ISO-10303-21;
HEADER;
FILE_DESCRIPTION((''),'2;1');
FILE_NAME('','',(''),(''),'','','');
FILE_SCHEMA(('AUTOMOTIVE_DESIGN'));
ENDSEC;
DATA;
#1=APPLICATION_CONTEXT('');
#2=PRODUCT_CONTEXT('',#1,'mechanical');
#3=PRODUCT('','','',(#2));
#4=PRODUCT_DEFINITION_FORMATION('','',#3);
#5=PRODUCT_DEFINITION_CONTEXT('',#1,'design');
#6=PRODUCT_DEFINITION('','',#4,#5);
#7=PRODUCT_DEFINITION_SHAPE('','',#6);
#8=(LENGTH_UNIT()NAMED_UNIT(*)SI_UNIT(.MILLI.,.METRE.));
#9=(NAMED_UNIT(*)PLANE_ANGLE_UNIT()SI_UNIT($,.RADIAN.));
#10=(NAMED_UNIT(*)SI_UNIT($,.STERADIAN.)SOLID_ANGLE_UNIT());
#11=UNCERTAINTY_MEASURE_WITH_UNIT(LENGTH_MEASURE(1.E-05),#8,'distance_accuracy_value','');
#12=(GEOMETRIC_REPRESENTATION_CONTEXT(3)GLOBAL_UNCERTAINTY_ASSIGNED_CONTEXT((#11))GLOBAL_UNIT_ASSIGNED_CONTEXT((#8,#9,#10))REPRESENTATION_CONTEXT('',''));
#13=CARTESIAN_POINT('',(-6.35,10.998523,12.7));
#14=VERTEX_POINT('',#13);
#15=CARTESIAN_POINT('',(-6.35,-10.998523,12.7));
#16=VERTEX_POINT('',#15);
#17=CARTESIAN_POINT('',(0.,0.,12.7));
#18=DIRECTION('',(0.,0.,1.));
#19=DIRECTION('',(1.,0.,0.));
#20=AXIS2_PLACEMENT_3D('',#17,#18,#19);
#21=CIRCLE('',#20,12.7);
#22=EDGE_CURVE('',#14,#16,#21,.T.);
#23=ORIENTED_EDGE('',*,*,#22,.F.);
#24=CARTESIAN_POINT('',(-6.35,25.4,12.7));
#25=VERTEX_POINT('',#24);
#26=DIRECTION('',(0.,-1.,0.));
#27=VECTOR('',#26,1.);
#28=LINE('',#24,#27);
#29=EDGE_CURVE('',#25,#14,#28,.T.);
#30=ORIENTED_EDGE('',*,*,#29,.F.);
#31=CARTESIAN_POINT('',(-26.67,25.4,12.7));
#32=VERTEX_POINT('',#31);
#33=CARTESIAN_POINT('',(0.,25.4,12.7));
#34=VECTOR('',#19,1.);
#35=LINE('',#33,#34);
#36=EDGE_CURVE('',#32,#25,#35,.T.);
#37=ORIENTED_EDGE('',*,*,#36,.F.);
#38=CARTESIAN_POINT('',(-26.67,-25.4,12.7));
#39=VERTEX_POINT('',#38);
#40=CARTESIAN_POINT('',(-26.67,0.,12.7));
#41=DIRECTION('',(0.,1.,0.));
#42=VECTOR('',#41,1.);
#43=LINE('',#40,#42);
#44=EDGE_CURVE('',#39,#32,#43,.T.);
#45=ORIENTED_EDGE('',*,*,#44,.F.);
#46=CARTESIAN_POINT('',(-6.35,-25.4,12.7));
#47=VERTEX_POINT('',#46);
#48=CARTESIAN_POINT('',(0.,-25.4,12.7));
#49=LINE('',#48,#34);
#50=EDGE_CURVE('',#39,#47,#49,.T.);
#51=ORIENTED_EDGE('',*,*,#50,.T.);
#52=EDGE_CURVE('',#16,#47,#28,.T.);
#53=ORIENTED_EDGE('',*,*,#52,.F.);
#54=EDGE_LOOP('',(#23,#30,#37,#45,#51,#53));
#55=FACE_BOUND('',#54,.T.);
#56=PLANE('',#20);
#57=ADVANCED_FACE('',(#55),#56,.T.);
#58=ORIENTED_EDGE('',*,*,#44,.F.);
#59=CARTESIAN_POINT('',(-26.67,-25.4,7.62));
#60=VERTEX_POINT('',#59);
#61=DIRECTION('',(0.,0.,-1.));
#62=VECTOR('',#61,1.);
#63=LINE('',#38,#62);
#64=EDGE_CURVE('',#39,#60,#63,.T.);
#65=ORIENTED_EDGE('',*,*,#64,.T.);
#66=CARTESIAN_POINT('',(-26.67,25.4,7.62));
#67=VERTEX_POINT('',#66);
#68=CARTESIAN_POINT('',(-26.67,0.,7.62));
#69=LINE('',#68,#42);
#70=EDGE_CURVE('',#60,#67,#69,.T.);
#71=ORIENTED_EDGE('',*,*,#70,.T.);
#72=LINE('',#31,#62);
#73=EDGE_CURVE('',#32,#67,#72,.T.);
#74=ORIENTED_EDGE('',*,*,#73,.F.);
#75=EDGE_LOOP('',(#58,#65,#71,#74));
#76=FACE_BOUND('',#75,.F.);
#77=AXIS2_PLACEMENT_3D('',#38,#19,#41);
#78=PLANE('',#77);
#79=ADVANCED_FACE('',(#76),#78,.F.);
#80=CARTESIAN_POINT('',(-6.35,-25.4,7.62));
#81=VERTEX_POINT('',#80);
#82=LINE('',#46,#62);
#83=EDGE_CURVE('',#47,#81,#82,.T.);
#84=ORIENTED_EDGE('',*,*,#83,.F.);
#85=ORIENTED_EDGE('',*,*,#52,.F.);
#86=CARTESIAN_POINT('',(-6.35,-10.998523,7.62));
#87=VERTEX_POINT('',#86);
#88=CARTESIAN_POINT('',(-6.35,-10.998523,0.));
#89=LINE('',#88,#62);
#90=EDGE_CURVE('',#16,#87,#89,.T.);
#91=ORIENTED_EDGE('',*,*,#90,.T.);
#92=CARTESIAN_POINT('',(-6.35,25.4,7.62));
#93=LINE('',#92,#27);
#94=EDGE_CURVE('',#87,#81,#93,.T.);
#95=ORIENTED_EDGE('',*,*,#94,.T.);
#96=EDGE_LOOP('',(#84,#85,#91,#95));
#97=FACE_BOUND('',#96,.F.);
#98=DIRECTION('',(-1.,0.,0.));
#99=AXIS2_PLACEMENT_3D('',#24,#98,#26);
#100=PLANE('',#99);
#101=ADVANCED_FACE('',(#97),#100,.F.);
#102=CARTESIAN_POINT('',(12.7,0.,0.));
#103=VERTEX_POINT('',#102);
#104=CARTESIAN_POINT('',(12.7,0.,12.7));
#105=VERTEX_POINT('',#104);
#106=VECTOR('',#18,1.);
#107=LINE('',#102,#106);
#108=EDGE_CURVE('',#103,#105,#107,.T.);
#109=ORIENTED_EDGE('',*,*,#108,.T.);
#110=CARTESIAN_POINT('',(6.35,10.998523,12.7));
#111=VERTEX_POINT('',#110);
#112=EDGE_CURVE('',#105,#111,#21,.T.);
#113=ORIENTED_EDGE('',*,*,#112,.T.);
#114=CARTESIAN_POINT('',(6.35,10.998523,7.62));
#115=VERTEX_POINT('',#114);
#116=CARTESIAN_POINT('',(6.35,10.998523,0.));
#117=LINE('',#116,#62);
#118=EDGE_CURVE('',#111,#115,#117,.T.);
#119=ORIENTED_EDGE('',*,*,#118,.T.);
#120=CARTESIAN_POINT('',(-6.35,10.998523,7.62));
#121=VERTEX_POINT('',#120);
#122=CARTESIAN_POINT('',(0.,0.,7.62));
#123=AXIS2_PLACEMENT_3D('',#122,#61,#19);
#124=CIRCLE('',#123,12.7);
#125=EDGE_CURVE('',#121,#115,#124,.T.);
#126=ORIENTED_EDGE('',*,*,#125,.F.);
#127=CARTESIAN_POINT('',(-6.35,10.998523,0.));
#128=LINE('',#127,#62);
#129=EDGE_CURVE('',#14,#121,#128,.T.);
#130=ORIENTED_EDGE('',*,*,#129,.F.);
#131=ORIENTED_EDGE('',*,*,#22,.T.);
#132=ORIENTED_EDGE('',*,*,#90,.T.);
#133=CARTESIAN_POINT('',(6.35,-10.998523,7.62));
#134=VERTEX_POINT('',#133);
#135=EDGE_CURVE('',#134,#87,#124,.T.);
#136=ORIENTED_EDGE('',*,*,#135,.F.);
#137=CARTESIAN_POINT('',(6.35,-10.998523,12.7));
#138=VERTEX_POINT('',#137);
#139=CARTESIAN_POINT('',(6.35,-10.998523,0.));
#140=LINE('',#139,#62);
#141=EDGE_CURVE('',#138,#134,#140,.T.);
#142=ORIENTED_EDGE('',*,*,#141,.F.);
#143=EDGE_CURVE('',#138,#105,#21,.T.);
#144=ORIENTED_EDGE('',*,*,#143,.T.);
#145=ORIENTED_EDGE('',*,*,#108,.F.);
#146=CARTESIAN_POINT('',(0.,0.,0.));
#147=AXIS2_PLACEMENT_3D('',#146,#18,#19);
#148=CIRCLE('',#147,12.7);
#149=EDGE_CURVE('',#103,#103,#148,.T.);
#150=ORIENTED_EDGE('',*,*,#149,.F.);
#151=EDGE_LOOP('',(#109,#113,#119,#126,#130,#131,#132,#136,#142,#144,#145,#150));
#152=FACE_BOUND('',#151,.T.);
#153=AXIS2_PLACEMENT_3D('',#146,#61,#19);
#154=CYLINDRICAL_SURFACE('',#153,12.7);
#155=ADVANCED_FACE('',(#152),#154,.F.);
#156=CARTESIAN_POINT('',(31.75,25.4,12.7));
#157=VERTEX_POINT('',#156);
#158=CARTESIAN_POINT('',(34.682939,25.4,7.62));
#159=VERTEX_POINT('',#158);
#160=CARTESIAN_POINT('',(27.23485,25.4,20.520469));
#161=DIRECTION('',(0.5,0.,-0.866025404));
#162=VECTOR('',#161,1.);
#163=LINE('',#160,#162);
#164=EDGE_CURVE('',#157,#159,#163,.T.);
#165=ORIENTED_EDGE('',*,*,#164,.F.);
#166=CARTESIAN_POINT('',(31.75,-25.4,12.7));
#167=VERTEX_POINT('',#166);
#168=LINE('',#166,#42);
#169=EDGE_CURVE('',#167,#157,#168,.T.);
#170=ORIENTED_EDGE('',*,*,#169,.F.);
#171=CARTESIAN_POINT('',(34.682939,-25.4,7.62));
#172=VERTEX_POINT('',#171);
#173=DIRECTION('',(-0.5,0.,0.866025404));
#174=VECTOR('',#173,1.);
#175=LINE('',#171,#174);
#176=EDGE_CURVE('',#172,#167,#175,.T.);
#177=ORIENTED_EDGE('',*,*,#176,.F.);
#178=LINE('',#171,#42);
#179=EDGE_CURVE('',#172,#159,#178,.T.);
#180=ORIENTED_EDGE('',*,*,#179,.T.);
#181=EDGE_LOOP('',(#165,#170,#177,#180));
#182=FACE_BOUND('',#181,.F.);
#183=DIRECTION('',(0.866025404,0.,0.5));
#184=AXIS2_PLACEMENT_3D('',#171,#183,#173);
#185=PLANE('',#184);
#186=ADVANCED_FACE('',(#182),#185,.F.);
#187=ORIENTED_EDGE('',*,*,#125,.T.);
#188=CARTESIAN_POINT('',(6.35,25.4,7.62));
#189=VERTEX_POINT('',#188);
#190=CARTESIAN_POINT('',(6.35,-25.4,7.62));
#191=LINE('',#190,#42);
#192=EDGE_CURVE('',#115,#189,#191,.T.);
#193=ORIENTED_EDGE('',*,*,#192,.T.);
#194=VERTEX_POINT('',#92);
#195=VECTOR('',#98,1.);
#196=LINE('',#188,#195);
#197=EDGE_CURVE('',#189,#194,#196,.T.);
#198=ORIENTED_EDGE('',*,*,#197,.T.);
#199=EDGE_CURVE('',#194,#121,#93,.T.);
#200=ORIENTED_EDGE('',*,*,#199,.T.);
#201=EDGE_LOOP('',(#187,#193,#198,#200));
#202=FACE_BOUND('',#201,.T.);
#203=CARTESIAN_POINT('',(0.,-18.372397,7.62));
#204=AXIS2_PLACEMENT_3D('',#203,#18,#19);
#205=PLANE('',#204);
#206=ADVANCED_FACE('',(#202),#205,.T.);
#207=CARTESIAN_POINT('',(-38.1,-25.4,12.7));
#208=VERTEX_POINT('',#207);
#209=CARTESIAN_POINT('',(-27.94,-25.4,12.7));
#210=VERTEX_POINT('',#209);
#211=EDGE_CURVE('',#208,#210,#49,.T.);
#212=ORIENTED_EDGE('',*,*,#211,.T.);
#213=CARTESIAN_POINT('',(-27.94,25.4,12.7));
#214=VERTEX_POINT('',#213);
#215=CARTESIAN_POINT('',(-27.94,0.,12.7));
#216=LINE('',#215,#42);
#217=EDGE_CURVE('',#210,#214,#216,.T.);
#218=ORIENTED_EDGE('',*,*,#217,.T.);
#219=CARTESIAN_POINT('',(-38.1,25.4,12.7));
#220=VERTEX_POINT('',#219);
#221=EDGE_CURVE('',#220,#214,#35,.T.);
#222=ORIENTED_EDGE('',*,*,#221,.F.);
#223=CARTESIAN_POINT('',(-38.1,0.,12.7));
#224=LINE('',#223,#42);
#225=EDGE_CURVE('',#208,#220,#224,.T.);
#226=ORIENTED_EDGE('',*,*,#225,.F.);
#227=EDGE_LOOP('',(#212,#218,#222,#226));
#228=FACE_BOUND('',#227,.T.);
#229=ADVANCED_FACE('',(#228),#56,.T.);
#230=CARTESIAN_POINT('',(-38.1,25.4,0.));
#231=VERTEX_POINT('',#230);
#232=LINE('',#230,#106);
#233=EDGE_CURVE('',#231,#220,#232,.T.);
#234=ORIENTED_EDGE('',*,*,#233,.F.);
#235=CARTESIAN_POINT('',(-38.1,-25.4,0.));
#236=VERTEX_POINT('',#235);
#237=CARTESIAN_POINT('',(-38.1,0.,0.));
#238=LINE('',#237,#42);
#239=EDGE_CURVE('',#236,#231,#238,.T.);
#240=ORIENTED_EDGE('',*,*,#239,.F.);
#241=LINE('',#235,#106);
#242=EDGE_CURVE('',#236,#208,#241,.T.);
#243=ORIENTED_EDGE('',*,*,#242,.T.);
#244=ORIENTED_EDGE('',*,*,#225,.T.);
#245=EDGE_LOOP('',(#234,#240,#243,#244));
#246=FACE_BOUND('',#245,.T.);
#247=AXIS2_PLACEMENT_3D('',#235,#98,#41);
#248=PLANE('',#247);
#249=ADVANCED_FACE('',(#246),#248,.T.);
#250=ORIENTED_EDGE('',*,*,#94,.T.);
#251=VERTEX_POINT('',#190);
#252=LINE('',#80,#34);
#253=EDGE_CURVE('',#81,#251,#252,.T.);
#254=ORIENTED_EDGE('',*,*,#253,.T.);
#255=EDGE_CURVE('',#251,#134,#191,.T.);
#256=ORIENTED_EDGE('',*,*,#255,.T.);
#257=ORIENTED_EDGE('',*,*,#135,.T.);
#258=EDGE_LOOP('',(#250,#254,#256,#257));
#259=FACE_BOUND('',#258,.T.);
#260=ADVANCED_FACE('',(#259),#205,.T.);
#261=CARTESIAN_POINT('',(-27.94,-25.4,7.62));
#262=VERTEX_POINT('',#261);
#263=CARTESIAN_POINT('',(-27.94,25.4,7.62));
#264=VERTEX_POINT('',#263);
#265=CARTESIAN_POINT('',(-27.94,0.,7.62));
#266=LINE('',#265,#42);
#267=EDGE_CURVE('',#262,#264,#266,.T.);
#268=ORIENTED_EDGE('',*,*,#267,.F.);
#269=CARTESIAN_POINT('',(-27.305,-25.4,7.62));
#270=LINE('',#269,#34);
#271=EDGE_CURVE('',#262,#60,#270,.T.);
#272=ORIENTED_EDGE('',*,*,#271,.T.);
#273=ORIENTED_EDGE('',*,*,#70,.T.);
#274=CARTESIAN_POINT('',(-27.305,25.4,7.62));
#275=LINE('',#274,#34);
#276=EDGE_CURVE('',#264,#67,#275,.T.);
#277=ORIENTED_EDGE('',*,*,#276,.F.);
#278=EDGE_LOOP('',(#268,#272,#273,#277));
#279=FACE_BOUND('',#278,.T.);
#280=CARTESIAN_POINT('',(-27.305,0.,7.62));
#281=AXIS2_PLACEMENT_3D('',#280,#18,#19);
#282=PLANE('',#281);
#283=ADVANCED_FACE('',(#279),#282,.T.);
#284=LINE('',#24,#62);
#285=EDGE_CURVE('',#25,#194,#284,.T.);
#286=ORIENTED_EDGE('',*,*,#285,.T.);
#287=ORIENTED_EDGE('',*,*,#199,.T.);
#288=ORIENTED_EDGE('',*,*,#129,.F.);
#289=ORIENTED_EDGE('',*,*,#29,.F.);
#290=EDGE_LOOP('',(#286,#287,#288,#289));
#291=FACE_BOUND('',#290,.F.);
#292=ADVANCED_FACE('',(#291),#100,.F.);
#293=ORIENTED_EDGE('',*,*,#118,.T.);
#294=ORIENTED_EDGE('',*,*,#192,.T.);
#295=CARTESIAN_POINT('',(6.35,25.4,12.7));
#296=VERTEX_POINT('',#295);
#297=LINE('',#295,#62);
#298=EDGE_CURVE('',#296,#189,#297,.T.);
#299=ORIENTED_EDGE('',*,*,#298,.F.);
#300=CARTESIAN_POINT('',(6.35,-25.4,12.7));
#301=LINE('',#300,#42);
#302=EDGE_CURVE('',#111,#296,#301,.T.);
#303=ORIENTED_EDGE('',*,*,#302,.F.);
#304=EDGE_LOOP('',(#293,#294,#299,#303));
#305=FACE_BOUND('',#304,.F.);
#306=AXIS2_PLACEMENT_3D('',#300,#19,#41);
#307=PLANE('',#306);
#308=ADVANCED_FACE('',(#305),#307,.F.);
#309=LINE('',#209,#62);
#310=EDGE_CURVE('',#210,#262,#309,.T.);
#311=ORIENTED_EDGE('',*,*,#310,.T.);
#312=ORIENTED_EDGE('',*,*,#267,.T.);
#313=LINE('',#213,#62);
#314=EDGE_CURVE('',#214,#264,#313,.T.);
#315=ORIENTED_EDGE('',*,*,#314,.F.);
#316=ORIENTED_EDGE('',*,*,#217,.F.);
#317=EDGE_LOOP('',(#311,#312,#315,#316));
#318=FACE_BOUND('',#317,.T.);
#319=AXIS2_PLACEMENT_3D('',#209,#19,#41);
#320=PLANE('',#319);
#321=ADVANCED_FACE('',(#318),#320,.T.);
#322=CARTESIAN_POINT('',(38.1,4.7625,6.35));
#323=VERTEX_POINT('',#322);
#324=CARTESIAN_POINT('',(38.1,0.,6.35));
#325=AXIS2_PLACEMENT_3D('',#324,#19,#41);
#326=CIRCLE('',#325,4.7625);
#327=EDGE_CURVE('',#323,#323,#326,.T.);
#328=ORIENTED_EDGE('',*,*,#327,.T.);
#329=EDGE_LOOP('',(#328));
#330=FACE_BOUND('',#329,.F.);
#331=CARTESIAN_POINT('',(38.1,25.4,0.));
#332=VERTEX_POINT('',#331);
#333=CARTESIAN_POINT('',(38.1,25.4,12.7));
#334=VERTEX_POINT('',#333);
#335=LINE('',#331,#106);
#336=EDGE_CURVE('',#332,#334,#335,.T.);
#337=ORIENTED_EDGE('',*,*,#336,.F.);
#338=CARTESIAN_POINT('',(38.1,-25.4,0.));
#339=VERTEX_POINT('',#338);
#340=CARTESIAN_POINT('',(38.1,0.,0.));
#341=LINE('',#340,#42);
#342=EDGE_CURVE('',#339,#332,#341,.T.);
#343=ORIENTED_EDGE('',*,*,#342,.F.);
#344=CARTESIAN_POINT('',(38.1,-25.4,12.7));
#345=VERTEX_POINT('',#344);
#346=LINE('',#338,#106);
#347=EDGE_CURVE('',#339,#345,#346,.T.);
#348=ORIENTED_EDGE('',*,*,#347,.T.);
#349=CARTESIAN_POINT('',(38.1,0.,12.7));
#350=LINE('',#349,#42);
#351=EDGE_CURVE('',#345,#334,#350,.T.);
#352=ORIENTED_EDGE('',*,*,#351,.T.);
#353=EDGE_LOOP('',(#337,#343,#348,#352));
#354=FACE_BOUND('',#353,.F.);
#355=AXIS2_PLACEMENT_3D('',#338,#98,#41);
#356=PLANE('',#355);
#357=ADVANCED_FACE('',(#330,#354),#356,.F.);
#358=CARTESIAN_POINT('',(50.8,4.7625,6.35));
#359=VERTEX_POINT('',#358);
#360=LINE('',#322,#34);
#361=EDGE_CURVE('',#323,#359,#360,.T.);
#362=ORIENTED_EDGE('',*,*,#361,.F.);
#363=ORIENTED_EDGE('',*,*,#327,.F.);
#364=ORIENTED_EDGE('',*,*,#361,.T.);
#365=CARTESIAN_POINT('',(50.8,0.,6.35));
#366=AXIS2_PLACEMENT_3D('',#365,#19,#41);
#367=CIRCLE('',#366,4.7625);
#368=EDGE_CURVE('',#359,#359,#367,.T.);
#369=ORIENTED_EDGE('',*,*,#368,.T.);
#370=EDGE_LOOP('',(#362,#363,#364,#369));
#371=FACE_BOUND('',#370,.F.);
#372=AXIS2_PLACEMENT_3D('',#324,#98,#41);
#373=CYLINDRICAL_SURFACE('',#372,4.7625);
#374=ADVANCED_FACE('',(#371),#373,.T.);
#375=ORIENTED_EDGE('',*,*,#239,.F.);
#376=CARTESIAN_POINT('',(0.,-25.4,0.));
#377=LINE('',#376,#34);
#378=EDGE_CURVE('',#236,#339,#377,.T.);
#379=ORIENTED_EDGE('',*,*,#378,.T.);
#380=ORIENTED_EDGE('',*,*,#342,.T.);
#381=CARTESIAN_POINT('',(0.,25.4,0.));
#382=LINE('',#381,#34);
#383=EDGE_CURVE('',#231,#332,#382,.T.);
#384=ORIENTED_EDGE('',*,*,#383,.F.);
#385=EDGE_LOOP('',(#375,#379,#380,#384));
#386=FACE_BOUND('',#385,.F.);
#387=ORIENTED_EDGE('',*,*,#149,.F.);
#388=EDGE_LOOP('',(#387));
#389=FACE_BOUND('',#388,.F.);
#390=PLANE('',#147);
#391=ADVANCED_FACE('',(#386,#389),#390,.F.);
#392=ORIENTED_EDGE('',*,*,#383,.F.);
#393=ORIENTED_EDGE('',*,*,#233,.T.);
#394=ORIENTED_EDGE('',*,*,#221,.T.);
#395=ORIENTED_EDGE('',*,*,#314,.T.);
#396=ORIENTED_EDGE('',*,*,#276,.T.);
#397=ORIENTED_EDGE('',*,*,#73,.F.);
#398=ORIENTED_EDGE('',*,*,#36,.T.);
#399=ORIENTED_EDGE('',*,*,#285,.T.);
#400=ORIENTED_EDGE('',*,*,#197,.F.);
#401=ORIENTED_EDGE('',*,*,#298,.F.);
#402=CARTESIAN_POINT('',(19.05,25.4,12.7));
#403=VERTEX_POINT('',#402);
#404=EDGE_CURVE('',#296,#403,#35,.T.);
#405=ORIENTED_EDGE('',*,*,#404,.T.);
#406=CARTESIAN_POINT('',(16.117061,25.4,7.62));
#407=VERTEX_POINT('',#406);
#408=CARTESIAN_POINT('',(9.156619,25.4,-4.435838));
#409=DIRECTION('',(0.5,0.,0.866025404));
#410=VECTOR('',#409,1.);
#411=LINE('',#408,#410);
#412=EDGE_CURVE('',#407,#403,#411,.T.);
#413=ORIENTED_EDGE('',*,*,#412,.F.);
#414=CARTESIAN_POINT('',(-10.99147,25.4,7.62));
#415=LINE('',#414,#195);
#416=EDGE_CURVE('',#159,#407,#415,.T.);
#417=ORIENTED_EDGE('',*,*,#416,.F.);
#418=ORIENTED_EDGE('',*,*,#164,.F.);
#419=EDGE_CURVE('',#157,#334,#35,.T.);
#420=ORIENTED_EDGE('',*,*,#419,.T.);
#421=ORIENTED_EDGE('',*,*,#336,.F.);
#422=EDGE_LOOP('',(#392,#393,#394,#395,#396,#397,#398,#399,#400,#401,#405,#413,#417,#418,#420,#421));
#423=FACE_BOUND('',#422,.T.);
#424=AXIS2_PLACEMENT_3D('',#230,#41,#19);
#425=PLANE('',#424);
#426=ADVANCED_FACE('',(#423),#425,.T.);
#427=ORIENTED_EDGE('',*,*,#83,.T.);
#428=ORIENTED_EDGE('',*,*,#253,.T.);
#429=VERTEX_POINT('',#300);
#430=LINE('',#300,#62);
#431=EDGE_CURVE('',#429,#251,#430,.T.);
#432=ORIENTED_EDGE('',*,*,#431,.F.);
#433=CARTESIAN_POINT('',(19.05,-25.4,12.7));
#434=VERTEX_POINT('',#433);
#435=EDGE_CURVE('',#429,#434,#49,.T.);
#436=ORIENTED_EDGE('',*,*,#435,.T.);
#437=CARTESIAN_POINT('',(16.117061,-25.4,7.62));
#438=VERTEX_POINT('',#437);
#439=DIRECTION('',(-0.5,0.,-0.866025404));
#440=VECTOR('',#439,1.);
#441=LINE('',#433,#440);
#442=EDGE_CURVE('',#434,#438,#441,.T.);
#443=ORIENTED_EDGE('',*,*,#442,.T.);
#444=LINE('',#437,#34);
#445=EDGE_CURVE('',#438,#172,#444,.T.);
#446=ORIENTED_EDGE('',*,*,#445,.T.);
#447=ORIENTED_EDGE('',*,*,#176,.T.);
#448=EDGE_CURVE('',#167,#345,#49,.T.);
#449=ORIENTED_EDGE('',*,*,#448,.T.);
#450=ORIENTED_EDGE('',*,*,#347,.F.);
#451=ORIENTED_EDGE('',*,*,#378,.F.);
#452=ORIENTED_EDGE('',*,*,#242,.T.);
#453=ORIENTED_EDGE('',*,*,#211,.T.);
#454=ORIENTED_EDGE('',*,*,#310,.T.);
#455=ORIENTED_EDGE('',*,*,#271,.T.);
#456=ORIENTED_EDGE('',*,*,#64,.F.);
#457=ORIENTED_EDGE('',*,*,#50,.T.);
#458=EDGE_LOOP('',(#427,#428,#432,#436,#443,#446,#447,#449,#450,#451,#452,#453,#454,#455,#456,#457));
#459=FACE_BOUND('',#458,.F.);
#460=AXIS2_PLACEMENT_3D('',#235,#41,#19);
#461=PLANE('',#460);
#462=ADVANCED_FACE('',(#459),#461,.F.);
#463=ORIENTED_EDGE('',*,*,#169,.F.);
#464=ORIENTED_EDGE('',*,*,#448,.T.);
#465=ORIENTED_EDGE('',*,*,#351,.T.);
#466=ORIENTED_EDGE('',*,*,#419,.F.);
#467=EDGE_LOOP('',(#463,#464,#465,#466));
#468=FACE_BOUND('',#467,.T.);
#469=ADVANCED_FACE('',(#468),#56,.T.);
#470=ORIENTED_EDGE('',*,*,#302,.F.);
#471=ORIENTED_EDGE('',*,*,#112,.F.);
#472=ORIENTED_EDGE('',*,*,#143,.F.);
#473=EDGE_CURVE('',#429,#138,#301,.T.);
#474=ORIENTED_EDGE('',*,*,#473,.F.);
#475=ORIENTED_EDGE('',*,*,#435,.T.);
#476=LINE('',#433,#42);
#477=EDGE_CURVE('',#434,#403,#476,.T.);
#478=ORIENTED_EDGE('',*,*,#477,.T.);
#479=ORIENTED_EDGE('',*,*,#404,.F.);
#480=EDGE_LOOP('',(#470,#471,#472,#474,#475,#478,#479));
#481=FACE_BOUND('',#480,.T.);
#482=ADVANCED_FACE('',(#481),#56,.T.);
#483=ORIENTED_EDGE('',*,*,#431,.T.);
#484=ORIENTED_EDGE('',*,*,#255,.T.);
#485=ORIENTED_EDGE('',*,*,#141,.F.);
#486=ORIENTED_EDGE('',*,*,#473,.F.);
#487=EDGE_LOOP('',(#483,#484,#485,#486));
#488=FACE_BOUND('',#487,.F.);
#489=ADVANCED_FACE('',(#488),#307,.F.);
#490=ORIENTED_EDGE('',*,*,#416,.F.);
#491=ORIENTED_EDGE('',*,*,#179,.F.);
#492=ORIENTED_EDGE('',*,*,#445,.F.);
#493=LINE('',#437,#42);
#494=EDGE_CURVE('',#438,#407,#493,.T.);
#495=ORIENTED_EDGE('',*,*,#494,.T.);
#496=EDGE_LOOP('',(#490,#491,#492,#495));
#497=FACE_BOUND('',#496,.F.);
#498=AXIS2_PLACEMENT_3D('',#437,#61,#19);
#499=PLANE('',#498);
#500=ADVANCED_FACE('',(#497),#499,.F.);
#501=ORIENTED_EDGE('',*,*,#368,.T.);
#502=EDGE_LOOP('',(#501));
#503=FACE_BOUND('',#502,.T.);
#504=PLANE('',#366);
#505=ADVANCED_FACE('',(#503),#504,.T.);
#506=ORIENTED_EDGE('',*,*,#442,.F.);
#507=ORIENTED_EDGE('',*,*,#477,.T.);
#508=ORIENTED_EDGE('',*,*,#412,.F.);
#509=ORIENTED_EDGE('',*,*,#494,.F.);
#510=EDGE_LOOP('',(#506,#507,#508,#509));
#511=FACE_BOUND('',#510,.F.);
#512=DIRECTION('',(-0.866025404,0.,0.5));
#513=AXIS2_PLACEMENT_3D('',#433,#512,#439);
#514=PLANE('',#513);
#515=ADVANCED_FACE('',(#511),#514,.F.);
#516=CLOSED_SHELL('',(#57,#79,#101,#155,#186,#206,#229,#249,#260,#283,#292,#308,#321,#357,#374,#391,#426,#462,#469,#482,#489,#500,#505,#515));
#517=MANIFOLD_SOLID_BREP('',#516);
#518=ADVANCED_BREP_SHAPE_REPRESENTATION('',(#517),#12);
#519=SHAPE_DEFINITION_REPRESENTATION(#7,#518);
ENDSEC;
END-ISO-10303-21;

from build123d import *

# Parameters (mm, degrees)
F0_W     = 76.2
F0_H     = 50.8
F0_R     = 12.7
F1_DEPTH = 12.7
F2_W     = 1.27
F2_H     = 50.8
F3_DEPTH = 5.08
F5_DEPTH = 50.801
F6_R     = 4.7625
F7_DEPTH = 12.7


with BuildPart() as f1:
    # F0 (on Top) → F1 (new body)
    with BuildSketch(Plane.XY):
        Rectangle(F0_W, F0_H)
        Circle(F0_R, mode=Mode.SUBTRACT)
    extrude(amount=F1_DEPTH)

    # F2 (on face) → F3 (cut)
    with BuildSketch(Plane.XY.offset(12.7)):
        with Locations((-27.305, 0)):
            Rectangle(F2_W, F2_H)
        with BuildLine():
            Line((-6.35, -10.9985226281), (-6.35, -25.4))
            Line((-6.35, -25.4), (6.35, -25.4))
            Line((6.35, -25.4), (6.35, -10.9985226281))
            ThreePointArc((6.35, -10.9985226281), (0, -12.7), (-6.35, -10.9985226281))
        make_face()
        with BuildLine():
            ThreePointArc((6.35, 10.9985226281), (0, 12.7), (-6.35, 10.9985226281))
            Line((-6.35, 10.9985226281), (-6.35, -10.9985226281))
            ThreePointArc((-6.35, -10.9985226281), (0, -12.7), (6.35, -10.9985226281))
            Line((6.35, -10.9985226281), (6.35, 10.9985226281))
        make_face()
        with BuildLine():
            Line((6.35, 25.4), (-6.35, 25.4))
            Line((-6.35, 25.4), (-6.35, 10.9985226281))
            ThreePointArc((-6.35, 10.9985226281), (0, 12.7), (6.35, 10.9985226281))
            Line((6.35, 10.9985226281), (6.35, 25.4))
        make_face()
    extrude(amount=-F3_DEPTH, mode=Mode.SUBTRACT)

    # F4 (on face) → F5 (cut, through all)
    with BuildSketch(Plane.XZ.offset(25.4)):
        Polygon((31.75, 12.7), (19.05, 12.7), (16.1170606325, 7.62), (34.6829393675, 7.62), align=None)
    extrude(amount=-F5_DEPTH, mode=Mode.SUBTRACT)

    # F6 (on face) → F7 (join)
    with BuildSketch(Plane.YZ.offset(38.1)):
        with Locations((0, 6.35)):
            Circle(F6_R)
    extrude(amount=F7_DEPTH)


solid = f1.part
